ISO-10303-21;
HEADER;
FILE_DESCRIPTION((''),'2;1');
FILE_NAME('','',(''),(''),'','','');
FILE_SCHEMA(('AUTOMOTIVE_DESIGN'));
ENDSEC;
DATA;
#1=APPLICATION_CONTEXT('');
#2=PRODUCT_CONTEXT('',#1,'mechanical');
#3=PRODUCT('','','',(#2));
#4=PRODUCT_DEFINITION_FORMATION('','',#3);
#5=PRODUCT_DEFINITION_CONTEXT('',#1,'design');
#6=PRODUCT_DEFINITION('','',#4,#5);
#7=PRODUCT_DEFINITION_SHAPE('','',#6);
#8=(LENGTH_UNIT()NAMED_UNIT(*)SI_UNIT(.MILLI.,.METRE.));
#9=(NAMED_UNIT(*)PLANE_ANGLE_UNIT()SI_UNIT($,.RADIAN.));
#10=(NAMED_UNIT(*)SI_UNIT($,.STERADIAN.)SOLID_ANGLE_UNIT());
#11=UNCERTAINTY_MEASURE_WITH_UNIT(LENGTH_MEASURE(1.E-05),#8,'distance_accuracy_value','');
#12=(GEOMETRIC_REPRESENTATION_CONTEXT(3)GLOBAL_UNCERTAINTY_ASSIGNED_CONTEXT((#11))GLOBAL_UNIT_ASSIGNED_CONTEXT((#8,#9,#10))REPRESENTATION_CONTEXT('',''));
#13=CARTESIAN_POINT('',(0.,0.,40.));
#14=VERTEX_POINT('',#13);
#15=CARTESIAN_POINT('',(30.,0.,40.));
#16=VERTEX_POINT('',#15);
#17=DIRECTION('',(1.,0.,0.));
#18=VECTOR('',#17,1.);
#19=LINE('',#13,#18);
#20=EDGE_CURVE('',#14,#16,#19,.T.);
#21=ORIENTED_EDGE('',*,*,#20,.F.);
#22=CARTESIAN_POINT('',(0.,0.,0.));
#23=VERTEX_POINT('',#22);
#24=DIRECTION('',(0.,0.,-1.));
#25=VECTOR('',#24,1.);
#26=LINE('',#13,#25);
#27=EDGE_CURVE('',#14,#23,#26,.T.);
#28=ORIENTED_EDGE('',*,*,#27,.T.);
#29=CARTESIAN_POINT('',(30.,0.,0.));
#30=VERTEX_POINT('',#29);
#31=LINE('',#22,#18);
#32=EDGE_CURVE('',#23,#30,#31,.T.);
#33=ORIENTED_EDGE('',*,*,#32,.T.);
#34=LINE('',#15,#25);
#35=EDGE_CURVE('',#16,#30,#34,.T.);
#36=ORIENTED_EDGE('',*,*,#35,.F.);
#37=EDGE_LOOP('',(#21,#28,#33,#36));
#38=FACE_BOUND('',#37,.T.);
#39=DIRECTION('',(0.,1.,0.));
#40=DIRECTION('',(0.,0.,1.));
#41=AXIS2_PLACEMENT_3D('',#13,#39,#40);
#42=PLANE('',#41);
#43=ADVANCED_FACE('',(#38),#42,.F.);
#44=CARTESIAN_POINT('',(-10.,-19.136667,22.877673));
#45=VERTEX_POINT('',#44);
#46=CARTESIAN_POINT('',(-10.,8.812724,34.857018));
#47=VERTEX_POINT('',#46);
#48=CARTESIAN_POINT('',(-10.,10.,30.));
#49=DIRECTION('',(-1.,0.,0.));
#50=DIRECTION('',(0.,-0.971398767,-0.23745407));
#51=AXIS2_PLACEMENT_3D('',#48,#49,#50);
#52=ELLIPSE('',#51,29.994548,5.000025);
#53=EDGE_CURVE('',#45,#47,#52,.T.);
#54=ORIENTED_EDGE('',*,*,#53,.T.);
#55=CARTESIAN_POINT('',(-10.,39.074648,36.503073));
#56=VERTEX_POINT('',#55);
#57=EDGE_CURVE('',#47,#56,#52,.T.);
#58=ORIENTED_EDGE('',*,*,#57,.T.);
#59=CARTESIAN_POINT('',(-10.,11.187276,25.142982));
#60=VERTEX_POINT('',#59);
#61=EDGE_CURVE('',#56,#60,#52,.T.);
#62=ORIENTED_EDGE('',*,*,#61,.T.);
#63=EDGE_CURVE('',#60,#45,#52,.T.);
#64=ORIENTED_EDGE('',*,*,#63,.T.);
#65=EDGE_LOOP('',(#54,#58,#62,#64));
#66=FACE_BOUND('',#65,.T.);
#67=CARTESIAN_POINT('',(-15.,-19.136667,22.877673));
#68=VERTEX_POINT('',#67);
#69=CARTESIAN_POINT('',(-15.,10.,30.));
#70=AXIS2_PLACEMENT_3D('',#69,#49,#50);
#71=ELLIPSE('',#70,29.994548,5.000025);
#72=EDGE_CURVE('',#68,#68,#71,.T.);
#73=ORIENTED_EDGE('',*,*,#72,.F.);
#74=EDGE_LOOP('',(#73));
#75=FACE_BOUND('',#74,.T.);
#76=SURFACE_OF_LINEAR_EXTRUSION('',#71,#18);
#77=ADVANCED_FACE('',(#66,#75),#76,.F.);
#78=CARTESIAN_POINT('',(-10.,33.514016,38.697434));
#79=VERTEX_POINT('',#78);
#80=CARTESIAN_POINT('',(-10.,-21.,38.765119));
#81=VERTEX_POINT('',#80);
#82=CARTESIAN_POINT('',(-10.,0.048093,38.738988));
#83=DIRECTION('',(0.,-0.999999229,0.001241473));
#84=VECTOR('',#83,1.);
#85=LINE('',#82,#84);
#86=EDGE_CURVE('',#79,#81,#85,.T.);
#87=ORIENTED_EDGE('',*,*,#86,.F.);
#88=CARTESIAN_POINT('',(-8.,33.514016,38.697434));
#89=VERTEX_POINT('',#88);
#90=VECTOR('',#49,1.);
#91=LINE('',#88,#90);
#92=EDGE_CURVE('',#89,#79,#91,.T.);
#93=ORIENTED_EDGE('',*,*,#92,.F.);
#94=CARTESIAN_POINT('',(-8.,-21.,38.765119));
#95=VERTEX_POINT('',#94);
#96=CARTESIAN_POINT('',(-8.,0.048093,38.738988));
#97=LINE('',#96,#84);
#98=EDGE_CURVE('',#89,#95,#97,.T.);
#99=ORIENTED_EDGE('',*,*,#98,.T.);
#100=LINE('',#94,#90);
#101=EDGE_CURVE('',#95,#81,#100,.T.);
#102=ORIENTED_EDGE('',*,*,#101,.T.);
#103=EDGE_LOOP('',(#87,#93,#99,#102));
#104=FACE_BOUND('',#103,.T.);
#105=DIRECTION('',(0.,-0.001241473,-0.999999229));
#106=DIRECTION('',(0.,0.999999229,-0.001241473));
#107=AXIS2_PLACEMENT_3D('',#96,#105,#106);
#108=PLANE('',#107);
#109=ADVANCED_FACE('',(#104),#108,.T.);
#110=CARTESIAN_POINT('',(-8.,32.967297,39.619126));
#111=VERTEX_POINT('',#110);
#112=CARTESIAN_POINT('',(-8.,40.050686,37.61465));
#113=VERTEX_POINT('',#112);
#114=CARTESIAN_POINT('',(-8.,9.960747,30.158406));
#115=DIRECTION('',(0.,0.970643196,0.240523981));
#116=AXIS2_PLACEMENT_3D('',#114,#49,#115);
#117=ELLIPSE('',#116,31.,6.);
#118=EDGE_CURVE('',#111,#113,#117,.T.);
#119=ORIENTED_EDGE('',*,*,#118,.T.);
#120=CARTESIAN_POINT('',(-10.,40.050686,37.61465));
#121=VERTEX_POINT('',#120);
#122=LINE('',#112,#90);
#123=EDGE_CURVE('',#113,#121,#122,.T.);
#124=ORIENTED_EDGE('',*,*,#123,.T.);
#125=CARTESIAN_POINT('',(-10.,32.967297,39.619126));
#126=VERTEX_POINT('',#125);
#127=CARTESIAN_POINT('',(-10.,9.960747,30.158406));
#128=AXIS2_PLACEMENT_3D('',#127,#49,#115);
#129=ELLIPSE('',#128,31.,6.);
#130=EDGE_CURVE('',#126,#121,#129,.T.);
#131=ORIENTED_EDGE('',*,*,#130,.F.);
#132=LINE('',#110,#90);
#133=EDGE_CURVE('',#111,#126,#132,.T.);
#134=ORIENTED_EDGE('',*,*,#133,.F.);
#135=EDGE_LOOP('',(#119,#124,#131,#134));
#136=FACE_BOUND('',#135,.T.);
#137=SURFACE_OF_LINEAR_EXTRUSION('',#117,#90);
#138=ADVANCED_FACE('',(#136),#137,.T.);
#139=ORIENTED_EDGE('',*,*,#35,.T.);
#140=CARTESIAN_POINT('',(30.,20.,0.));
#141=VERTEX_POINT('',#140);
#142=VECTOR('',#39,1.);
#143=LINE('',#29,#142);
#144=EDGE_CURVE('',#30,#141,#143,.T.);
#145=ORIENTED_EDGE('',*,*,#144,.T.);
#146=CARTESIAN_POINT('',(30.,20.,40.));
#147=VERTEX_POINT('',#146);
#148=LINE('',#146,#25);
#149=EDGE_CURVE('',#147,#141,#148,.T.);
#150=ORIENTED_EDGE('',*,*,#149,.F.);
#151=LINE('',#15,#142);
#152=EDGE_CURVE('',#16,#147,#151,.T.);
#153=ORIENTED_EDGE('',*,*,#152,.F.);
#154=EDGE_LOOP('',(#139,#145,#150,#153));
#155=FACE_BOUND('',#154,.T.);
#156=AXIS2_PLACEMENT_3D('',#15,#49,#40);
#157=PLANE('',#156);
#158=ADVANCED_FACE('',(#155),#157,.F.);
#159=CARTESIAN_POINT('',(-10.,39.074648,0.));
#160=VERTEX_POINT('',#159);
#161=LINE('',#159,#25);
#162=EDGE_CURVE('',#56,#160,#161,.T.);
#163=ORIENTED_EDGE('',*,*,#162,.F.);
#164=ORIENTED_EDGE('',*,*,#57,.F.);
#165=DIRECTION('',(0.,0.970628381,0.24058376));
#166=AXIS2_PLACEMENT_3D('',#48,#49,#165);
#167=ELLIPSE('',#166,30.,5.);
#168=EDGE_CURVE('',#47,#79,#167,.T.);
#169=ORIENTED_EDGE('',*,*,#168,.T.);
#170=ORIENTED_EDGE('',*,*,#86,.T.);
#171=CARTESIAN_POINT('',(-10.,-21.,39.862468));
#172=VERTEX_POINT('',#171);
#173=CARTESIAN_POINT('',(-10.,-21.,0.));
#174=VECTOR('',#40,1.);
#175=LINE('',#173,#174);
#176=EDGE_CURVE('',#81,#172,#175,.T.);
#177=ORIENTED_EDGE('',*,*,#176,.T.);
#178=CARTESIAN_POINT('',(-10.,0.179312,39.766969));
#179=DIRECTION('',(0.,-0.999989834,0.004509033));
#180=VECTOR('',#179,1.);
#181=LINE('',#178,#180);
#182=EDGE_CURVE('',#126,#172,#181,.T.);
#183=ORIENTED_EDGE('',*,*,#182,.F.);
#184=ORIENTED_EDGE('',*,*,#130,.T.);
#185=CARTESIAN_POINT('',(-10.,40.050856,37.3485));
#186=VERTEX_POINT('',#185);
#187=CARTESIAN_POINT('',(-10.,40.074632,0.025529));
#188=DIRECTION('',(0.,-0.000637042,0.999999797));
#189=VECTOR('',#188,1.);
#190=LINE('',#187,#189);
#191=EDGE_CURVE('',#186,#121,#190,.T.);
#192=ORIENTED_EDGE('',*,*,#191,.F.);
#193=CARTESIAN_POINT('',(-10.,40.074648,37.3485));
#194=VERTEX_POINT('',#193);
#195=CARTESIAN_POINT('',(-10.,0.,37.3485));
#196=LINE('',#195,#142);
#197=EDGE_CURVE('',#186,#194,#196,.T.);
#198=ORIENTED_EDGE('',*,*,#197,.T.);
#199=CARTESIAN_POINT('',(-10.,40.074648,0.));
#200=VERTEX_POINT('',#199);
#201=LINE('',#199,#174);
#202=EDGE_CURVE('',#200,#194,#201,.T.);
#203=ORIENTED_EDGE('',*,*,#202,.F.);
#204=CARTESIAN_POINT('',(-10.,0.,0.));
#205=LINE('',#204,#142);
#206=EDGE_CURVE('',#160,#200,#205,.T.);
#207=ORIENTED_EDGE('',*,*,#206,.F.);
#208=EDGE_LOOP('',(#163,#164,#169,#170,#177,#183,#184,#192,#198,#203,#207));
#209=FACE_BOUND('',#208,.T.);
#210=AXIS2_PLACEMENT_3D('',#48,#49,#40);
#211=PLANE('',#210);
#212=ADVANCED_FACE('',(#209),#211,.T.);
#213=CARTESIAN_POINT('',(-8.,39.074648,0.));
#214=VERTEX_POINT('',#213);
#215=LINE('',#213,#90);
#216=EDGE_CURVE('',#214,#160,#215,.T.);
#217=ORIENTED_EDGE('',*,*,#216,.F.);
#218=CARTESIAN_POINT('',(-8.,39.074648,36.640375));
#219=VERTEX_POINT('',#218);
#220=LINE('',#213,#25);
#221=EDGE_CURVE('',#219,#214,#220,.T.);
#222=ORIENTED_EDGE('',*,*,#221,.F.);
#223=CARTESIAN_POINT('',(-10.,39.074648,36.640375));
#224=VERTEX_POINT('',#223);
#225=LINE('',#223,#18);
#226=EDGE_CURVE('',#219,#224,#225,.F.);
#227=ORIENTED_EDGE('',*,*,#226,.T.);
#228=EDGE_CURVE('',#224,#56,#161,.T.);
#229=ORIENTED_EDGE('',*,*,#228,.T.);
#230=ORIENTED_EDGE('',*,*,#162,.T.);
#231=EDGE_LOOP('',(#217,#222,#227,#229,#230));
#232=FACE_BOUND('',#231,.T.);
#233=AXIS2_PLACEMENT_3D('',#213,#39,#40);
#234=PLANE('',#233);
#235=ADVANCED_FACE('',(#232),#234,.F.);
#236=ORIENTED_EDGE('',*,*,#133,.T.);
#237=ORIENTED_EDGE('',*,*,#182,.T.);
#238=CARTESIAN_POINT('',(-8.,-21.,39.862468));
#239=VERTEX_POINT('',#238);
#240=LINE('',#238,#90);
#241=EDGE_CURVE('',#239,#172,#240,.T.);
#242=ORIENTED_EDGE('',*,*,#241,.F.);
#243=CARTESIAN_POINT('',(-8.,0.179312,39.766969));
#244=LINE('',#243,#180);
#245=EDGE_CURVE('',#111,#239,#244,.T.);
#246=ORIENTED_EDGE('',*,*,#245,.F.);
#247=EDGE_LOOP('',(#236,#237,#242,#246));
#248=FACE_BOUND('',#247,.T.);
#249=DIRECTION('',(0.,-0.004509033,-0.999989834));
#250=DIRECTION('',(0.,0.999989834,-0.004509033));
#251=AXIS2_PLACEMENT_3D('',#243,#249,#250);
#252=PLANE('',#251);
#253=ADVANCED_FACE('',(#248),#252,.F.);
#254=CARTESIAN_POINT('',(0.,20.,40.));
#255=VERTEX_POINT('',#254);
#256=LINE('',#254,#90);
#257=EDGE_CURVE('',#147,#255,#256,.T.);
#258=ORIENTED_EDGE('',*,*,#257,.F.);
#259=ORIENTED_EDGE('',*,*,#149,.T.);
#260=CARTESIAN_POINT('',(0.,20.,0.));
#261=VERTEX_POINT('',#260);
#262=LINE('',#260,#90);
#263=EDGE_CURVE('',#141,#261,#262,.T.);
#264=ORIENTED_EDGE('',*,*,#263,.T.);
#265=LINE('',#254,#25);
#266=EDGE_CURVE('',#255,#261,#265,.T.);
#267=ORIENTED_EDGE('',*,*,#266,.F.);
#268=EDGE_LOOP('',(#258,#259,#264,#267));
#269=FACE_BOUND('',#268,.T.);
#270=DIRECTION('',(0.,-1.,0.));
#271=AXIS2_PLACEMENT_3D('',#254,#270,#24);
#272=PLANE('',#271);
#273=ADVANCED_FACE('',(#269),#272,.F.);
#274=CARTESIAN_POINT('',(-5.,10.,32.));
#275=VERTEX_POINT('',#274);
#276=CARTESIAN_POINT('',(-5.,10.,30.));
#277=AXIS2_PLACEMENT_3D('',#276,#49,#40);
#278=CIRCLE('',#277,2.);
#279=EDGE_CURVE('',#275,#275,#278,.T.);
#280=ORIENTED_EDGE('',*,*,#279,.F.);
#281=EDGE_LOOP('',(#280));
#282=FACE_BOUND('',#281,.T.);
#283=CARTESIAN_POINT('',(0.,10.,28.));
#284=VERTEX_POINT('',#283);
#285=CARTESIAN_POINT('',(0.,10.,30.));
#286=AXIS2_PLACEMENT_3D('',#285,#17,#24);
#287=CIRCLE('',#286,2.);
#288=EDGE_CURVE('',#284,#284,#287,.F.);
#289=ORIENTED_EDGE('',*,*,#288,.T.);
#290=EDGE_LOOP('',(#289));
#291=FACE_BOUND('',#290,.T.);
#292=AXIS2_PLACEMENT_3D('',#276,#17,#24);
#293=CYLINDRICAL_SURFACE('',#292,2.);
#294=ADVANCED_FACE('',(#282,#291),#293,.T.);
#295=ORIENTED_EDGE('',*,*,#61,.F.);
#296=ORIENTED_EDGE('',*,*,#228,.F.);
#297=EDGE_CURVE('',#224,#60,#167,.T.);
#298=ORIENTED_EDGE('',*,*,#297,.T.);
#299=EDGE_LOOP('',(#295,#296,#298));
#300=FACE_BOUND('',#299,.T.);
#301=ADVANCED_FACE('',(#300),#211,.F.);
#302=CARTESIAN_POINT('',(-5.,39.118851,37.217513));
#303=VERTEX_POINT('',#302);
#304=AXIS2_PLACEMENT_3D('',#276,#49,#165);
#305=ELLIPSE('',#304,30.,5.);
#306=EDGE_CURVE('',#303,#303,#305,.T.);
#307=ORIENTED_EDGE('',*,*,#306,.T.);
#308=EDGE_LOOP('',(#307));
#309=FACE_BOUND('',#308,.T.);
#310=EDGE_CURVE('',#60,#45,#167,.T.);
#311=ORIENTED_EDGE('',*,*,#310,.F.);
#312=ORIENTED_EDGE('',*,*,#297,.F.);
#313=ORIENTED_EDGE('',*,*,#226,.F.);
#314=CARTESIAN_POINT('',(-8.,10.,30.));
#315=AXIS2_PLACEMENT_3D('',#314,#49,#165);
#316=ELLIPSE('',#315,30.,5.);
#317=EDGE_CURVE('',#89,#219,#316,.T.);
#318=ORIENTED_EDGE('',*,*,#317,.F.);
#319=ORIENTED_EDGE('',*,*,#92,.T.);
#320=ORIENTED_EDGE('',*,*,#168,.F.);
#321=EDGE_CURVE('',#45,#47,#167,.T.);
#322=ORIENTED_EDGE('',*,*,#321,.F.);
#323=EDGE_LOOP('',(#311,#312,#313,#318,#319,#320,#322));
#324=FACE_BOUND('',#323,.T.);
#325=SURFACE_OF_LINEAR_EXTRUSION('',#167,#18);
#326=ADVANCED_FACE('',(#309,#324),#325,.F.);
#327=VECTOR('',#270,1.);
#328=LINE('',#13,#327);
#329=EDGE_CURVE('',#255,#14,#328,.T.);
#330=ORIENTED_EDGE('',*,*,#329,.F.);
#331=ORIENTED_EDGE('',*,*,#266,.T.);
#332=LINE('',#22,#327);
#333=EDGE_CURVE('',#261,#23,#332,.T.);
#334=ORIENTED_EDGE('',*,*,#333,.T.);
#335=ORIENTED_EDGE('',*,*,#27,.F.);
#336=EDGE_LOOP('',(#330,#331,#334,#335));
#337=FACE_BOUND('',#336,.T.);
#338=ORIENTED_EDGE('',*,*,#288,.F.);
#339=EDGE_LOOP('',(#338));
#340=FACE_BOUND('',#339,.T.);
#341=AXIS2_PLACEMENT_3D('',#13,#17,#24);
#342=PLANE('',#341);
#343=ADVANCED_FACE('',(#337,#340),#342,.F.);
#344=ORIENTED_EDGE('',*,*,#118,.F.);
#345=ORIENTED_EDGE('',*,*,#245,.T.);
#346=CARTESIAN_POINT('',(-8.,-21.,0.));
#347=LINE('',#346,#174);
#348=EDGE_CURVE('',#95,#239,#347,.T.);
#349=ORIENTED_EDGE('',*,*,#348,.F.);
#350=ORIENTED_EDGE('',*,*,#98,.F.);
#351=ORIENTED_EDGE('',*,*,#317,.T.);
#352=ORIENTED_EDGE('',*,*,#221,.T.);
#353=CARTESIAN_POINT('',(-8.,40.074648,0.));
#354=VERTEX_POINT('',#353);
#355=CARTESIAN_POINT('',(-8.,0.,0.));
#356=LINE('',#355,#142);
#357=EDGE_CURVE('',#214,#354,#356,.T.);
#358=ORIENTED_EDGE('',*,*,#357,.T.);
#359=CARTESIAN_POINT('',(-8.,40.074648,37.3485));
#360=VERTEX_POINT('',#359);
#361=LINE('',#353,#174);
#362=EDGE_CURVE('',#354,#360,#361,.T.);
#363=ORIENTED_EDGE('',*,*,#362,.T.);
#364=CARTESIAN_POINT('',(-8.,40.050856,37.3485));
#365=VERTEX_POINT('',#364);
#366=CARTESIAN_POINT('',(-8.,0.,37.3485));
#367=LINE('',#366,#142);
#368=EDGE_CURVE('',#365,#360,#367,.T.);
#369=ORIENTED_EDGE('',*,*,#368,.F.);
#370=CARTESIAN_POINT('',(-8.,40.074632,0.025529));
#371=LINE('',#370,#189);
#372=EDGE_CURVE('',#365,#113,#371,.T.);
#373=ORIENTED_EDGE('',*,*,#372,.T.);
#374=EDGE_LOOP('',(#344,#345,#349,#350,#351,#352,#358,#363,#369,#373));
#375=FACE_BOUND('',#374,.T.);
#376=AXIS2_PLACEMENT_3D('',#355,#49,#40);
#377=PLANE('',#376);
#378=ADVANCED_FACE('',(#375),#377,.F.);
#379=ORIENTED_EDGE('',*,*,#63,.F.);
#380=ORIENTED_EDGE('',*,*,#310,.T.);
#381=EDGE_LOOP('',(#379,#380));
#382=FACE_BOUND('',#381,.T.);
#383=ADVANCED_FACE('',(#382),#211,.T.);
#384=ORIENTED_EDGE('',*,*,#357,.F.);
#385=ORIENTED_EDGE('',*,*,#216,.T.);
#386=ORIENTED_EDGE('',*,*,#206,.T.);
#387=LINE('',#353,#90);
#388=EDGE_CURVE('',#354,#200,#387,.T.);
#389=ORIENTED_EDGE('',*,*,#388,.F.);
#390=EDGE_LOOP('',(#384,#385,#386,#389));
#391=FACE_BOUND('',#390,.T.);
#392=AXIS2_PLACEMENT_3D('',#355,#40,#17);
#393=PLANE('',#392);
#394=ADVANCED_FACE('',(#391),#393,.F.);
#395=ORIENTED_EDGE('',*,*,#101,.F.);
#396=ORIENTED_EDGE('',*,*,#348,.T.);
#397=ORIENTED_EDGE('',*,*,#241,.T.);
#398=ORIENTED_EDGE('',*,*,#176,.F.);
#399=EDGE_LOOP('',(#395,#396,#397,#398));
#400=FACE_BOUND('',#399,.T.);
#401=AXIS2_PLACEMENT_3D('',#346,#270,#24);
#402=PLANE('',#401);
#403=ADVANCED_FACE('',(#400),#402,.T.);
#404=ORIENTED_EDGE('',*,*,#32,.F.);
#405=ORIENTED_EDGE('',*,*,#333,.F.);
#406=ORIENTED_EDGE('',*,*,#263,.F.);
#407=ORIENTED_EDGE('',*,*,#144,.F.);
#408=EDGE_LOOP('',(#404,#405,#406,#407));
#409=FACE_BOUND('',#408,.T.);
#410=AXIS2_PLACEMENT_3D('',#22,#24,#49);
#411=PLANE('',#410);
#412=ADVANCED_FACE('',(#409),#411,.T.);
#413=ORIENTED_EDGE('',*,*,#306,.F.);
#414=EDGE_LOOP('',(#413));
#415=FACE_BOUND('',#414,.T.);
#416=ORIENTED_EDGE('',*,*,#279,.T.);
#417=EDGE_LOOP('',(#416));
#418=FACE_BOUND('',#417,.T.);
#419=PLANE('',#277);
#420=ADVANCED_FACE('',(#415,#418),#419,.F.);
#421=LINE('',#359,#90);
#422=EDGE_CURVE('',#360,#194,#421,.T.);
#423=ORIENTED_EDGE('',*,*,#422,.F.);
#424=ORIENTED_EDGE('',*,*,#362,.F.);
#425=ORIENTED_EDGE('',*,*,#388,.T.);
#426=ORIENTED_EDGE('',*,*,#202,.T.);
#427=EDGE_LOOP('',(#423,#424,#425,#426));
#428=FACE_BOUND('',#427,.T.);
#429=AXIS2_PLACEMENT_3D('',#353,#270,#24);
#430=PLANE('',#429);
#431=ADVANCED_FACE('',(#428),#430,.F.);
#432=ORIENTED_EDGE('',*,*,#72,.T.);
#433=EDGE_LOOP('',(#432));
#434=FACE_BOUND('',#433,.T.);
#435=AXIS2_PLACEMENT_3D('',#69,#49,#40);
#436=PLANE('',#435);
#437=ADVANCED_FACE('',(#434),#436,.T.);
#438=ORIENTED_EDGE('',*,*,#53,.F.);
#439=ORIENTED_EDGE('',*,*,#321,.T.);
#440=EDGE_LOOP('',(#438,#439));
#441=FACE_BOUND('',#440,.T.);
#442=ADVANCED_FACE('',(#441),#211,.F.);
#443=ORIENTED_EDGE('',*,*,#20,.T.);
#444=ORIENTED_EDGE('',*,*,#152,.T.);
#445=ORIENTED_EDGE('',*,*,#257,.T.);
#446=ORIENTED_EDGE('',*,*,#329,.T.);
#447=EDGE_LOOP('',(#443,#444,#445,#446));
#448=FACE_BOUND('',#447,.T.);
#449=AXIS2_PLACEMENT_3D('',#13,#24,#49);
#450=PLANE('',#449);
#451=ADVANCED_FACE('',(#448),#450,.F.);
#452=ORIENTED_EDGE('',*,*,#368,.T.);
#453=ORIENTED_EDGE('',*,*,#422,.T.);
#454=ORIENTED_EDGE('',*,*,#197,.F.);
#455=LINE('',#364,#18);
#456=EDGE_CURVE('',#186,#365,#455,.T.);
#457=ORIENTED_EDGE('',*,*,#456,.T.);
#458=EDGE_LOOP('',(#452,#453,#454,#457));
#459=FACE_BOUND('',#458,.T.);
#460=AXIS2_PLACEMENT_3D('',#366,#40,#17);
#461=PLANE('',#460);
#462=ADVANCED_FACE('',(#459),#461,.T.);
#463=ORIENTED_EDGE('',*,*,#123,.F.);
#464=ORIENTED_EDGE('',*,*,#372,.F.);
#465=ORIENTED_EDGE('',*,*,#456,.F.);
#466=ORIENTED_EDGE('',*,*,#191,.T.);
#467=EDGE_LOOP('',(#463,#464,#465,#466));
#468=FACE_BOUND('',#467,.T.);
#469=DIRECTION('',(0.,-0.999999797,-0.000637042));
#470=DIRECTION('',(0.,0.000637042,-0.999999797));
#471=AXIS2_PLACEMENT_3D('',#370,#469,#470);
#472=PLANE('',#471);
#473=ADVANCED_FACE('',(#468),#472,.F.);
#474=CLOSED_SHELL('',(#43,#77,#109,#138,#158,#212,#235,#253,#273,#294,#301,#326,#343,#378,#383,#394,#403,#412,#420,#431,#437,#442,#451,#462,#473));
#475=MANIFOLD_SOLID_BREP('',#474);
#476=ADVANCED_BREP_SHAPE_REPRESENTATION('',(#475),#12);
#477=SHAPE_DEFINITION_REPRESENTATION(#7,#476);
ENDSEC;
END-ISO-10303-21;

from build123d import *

# Parameters (mm, degrees)
SKETCH_1_W      = 30
SKETCH_1_H      = 20
EXTRUDE_1_DEPTH = 40
SKETCH_2_R      = 2
EXTRUDE_2_DEPTH = 5
SKETCH_3_RX     = 30
SKETCH_3_RY     = 5
EXTRUDE_3_DEPTH = 5
SKETCH_4_W      = 37.348500324
SKETCH_4_H      = 1
EXTRUDE_4_DEPTH = 2
EXTRUDE_START   = -2
EXTRUDE_5_DEPTH = 2
SKETCH_6_RX     = 29.994547564
SKETCH_6_RY     = 5.00002525
EXTRUDE_6_DEPTH = 5


# Read off the part's stored shape, not the designer's step: 凸台-拉伸5
with BuildPart() as part:
    # 草图1 → 凸台-拉伸1 (new body)
    with BuildSketch(Plane.XY):
        with Locations((15, 10)):
            Rectangle(SKETCH_1_W, SKETCH_1_H)
    extrude(amount=EXTRUDE_1_DEPTH)

    # 草图2 → 凸台-拉伸2 (add)
    with BuildSketch(Plane.ZY):
        with Locations(Location((30, 10, 0), (0, 0, 180))):
            Circle(SKETCH_2_R)
    extrude(amount=EXTRUDE_2_DEPTH)

    # 草图3 → 凸台-拉伸3 (add)
    with BuildSketch(Plane.ZY.offset(5)):
        with Locations(Location((30, 10), (0, 0, -103.92099691))):
            Ellipse(SKETCH_3_RX, SKETCH_3_RY)
    extrude(amount=EXTRUDE_3_DEPTH)

    # 草图4 → 凸台-拉伸4 (add)
    with BuildSketch(Plane.ZY.offset(10)):
        with Locations((18.674250162, 39.574648358)):
            Rectangle(SKETCH_4_W, SKETCH_4_H)
    extrude(amount=-EXTRUDE_4_DEPTH)

    # 凸台-拉伸5 outline → 凸台-拉伸5 (add)
    with BuildSketch(Plane.ZY.offset(10).offset(EXTRUDE_START)):
        with BuildLine():
            Line((39.862468471, -21), (39.619125683, 32.967296936))
            add(Edge.make_bspline(
                [(39.619125683, 32.967296936), (39.589392589, 39.561347803), (37.614649654, 40.050686248)],
                knots=[5.629361553, 5.629361553, 5.629361553, 6.283185307, 6.283185307, 6.283185307], degree=2, weights=[1, 0.947038516, 1]))
            Line((37.614649654, 40.050686248), (37.348500324, 40.050855796))
            Line((37.348500324, 40.050855796), (37.348500324, 39.074648358))
            add(Edge.make_bspline(
                [(38.697434301, 33.514015855), (38.694345199, 38.494694197), (37.348500324, 39.074648358)],
                knots=[5.657287765, 5.657287765, 5.657287765, 6.250122592, 6.250122592, 6.250122592], degree=2, weights=[0.790463711, 0.847402464, 0.984462923]))
            Line((38.697434301, 33.514015855), (38.765118588, -21))
            Line((38.765118588, -21), (39.862468471, -21))
        make_face()
    extrude(amount=EXTRUDE_5_DEPTH)

    # 草图6 → 凸台-拉伸6 (add)
    with BuildSketch(Plane.ZY.offset(10)):
        with Locations(Location((30, 10), (0, 0, -103.736326108))):
            Ellipse(SKETCH_6_RX, SKETCH_6_RY)
    extrude(amount=EXTRUDE_6_DEPTH)


solid = part.part
